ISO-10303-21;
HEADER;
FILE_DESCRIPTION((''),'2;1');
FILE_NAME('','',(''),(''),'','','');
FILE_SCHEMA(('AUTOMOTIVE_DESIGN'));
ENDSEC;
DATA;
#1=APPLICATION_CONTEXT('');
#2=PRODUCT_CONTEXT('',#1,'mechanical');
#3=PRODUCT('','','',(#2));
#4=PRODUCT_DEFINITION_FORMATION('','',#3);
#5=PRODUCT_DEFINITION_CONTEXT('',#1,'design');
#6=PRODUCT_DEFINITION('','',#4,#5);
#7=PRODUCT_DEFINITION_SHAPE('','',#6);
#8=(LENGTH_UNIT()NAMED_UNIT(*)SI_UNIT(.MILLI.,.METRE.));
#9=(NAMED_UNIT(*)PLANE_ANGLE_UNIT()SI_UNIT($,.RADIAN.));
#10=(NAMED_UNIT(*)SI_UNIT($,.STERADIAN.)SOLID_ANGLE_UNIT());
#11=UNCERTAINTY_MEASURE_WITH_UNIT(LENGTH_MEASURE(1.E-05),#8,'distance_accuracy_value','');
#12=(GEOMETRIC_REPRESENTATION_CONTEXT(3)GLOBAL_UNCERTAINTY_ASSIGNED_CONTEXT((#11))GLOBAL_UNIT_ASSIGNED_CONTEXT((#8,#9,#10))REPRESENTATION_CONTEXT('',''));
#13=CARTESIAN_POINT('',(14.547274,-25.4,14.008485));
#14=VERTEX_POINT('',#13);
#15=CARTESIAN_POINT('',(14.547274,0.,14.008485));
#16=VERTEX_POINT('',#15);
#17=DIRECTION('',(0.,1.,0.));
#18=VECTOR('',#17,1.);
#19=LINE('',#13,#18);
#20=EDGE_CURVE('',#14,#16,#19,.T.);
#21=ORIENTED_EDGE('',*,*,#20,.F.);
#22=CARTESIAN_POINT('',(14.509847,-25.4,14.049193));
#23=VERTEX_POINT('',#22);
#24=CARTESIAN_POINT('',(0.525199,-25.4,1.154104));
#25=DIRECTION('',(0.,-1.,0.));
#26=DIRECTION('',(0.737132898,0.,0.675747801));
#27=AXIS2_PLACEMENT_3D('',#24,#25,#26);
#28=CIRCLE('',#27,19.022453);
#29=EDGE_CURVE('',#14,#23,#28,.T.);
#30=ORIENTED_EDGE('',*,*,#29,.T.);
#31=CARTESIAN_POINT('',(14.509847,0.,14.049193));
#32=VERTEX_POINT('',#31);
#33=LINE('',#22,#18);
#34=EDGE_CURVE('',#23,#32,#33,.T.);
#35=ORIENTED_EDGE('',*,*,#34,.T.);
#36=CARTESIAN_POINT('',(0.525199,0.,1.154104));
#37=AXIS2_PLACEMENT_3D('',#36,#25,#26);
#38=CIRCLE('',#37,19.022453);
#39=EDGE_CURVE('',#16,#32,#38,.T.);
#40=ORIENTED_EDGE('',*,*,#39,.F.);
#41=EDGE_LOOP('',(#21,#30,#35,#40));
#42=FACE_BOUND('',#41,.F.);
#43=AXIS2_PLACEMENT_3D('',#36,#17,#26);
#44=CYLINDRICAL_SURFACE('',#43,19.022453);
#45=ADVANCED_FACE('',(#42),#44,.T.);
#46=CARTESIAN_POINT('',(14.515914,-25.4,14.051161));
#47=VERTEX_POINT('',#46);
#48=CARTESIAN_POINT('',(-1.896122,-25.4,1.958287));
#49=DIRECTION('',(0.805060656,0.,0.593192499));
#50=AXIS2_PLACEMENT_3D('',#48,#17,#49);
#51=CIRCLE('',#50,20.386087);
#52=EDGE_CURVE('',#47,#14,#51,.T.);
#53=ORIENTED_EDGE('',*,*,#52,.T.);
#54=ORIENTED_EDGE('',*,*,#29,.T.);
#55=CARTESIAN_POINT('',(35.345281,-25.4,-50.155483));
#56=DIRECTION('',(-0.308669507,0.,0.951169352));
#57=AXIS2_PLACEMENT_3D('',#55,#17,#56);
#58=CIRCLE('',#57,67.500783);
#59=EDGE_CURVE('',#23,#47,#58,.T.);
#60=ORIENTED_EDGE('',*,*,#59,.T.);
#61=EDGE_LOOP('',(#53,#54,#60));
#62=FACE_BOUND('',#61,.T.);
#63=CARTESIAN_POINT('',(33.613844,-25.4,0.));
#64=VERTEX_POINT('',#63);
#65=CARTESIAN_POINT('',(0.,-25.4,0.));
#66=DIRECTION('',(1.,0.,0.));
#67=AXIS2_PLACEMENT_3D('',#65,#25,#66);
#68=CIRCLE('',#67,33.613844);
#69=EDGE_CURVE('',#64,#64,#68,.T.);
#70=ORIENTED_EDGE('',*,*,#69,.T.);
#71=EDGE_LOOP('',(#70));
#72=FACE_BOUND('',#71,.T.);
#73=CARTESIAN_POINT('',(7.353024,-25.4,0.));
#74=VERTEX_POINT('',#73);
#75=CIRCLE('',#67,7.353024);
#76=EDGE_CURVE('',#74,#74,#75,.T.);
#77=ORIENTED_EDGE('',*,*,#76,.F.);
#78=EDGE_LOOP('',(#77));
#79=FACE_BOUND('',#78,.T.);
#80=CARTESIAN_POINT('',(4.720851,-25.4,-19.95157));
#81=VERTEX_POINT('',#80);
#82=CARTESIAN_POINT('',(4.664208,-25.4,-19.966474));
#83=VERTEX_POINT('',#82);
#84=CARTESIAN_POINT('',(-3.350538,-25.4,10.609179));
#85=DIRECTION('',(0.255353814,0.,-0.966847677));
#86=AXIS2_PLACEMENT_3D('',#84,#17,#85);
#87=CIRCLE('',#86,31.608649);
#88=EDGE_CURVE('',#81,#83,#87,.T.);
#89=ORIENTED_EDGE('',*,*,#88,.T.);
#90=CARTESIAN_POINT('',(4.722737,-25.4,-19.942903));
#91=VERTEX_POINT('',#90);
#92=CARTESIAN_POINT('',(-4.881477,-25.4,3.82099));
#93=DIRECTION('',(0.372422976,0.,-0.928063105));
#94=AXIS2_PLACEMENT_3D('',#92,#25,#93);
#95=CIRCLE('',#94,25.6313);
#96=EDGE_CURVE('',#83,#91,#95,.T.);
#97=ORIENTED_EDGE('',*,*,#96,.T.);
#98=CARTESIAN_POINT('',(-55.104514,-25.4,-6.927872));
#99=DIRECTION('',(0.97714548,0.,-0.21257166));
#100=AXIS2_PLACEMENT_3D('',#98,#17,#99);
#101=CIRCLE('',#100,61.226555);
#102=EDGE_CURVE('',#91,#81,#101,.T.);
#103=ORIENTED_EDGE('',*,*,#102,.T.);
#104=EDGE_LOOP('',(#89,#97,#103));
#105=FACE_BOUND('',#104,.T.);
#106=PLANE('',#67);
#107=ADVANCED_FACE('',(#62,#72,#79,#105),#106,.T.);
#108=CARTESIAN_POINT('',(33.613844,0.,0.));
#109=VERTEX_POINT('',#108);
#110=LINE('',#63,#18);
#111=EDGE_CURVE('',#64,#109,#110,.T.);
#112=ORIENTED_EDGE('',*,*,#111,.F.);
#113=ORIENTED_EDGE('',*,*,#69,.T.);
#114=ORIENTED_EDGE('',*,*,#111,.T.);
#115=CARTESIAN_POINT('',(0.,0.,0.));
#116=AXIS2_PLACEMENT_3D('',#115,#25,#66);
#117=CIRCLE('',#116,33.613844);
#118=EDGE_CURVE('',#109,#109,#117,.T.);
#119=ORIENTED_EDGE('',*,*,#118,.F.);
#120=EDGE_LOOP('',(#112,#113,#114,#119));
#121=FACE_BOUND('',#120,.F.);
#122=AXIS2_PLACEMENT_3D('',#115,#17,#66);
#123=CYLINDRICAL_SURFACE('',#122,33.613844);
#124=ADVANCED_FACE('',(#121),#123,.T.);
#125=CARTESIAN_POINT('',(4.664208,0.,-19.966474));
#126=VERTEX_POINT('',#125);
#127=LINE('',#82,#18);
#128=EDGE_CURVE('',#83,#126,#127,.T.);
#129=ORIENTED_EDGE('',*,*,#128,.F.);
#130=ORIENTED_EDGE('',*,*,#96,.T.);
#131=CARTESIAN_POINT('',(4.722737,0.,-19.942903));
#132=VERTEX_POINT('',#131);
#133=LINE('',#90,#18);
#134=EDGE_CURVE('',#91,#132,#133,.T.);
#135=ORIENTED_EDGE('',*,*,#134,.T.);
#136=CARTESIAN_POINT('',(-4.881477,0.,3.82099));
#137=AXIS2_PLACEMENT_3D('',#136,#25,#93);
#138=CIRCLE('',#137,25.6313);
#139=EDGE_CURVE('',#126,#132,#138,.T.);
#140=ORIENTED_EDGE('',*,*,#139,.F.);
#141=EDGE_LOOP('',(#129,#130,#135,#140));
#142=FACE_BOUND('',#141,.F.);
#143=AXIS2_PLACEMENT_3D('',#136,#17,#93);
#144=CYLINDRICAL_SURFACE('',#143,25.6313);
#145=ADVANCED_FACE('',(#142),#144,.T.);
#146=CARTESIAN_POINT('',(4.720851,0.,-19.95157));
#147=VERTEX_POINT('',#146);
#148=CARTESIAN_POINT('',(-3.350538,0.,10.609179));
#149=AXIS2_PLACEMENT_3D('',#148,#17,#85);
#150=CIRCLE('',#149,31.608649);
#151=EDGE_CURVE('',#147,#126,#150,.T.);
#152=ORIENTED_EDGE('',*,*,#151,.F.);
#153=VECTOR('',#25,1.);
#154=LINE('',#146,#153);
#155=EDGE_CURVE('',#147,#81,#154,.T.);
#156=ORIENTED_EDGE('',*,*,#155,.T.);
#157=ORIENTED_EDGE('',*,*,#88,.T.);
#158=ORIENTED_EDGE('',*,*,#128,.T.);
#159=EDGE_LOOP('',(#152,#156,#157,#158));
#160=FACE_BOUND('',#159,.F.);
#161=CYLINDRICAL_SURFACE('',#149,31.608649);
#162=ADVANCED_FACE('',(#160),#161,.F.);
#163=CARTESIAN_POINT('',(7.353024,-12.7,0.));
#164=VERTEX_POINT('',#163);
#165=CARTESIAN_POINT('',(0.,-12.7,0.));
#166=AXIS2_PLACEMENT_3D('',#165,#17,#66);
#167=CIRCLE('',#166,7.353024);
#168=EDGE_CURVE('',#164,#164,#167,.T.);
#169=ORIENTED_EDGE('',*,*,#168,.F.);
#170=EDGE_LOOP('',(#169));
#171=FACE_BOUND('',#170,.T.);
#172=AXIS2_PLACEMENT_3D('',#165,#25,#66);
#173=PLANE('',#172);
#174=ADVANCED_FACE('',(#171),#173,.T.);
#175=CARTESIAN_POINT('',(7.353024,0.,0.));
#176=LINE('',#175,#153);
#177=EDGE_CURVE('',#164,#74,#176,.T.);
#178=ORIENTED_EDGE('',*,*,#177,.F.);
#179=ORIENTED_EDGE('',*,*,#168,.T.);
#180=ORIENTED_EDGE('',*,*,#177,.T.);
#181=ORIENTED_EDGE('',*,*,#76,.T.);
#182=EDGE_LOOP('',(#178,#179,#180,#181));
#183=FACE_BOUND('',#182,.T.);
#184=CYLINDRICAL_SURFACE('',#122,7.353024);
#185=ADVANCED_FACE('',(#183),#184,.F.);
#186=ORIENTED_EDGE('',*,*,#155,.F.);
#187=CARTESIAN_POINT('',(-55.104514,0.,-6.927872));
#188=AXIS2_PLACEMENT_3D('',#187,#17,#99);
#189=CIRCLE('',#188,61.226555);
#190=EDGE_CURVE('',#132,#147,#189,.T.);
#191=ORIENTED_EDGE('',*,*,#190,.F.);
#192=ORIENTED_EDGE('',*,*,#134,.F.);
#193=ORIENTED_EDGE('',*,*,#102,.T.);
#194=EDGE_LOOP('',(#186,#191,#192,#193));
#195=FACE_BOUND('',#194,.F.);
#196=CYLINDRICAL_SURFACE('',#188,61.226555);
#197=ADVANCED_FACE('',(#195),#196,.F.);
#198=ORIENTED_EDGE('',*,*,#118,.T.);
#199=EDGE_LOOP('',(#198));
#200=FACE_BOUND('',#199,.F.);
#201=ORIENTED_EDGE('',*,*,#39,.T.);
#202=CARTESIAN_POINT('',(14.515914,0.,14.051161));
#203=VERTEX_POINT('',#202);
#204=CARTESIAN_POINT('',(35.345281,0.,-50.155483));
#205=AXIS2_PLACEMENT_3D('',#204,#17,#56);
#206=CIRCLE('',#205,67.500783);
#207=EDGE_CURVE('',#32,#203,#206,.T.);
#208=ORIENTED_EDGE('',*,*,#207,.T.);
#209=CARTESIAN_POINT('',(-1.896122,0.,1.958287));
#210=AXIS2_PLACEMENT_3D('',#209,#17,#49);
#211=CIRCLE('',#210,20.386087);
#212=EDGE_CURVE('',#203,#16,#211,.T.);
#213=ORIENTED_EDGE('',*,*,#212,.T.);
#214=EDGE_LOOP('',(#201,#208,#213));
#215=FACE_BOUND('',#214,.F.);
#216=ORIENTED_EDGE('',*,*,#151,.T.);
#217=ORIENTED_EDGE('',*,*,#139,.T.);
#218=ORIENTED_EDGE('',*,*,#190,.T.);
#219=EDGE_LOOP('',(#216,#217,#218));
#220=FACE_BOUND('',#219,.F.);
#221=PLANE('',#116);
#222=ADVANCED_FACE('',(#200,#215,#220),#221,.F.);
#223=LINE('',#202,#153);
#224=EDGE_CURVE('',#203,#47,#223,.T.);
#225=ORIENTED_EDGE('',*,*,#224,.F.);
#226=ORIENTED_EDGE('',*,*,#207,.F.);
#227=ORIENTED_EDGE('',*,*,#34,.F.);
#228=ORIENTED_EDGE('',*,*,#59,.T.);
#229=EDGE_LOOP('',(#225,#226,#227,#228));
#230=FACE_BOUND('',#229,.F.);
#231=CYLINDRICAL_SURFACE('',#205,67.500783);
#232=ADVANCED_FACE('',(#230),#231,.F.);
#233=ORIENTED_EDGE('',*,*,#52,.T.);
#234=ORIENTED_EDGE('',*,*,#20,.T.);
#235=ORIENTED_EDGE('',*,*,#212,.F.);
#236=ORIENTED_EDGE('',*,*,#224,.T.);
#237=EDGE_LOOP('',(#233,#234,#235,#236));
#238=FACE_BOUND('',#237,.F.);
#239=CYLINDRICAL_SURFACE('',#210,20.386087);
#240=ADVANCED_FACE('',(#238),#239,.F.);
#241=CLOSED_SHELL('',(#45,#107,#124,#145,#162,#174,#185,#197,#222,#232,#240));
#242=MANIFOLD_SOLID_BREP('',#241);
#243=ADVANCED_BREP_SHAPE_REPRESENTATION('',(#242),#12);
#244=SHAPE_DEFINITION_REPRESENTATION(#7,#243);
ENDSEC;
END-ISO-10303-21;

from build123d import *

# Parameters (mm, degrees)
F0_R     = 33.613844165
F0_R_2   = 7.3530240303
F1_DEPTH = 12.7
F2_DEPTH = 25.4


with BuildPart() as f1:
    # F0 (on Front) → F1 (new body)
    with BuildSketch(Plane.XZ):
        Circle(F0_R)
        with BuildLine():
            ThreePointArc((4.7208512746, -19.951569966), (4.6925332266, -19.9590350044), (4.6642082743, -19.9664738029))
            ThreePointArc((4.6642082743, -19.9664738029), (4.6934800842, -19.9547063806), (4.7227373879, -19.9429029377))
            ThreePointArc((4.7227373879, -19.9429029377), (4.7217944882, -19.947236486), (4.7208512746, -19.951569966))
        make_face(mode=Mode.SUBTRACT)
        Circle(F0_R_2, mode=Mode.SUBTRACT)
        with BuildLine():
            ThreePointArc((14.5159144375, 14.0511614861), (14.5316083012, 14.029833317), (14.547274448, 14.0084847808))
            ThreePointArc((14.547274448, 14.0084847808), (14.5285756501, 14.0288524457), (14.5098472673, 14.0491929102))
            ThreePointArc((14.5098472673, 14.0491929102), (14.5128808291, 14.0501772698), (14.5159144375, 14.0511614861))
        make_face(mode=Mode.SUBTRACT)
        Circle(F0_R_2)
    extrude(amount=F1_DEPTH)

    # F0 (on Front) → F2 (join)
    with BuildSketch(Plane.XZ):
        Circle(F0_R)
        with BuildLine():
            ThreePointArc((4.7208512746, -19.951569966), (4.6925332266, -19.9590350044), (4.6642082743, -19.9664738029))
            ThreePointArc((4.6642082743, -19.9664738029), (4.6934800842, -19.9547063806), (4.7227373879, -19.9429029377))
            ThreePointArc((4.7227373879, -19.9429029377), (4.7217944882, -19.947236486), (4.7208512746, -19.951569966))
        make_face(mode=Mode.SUBTRACT)
        Circle(F0_R_2, mode=Mode.SUBTRACT)
        with BuildLine():
            ThreePointArc((14.5159144375, 14.0511614861), (14.5316083012, 14.029833317), (14.547274448, 14.0084847808))
            ThreePointArc((14.547274448, 14.0084847808), (14.5285756501, 14.0288524457), (14.5098472673, 14.0491929102))
            ThreePointArc((14.5098472673, 14.0491929102), (14.5128808291, 14.0501772698), (14.5159144375, 14.0511614861))
        make_face(mode=Mode.SUBTRACT)
    extrude(amount=F2_DEPTH)


solid = f1.part
